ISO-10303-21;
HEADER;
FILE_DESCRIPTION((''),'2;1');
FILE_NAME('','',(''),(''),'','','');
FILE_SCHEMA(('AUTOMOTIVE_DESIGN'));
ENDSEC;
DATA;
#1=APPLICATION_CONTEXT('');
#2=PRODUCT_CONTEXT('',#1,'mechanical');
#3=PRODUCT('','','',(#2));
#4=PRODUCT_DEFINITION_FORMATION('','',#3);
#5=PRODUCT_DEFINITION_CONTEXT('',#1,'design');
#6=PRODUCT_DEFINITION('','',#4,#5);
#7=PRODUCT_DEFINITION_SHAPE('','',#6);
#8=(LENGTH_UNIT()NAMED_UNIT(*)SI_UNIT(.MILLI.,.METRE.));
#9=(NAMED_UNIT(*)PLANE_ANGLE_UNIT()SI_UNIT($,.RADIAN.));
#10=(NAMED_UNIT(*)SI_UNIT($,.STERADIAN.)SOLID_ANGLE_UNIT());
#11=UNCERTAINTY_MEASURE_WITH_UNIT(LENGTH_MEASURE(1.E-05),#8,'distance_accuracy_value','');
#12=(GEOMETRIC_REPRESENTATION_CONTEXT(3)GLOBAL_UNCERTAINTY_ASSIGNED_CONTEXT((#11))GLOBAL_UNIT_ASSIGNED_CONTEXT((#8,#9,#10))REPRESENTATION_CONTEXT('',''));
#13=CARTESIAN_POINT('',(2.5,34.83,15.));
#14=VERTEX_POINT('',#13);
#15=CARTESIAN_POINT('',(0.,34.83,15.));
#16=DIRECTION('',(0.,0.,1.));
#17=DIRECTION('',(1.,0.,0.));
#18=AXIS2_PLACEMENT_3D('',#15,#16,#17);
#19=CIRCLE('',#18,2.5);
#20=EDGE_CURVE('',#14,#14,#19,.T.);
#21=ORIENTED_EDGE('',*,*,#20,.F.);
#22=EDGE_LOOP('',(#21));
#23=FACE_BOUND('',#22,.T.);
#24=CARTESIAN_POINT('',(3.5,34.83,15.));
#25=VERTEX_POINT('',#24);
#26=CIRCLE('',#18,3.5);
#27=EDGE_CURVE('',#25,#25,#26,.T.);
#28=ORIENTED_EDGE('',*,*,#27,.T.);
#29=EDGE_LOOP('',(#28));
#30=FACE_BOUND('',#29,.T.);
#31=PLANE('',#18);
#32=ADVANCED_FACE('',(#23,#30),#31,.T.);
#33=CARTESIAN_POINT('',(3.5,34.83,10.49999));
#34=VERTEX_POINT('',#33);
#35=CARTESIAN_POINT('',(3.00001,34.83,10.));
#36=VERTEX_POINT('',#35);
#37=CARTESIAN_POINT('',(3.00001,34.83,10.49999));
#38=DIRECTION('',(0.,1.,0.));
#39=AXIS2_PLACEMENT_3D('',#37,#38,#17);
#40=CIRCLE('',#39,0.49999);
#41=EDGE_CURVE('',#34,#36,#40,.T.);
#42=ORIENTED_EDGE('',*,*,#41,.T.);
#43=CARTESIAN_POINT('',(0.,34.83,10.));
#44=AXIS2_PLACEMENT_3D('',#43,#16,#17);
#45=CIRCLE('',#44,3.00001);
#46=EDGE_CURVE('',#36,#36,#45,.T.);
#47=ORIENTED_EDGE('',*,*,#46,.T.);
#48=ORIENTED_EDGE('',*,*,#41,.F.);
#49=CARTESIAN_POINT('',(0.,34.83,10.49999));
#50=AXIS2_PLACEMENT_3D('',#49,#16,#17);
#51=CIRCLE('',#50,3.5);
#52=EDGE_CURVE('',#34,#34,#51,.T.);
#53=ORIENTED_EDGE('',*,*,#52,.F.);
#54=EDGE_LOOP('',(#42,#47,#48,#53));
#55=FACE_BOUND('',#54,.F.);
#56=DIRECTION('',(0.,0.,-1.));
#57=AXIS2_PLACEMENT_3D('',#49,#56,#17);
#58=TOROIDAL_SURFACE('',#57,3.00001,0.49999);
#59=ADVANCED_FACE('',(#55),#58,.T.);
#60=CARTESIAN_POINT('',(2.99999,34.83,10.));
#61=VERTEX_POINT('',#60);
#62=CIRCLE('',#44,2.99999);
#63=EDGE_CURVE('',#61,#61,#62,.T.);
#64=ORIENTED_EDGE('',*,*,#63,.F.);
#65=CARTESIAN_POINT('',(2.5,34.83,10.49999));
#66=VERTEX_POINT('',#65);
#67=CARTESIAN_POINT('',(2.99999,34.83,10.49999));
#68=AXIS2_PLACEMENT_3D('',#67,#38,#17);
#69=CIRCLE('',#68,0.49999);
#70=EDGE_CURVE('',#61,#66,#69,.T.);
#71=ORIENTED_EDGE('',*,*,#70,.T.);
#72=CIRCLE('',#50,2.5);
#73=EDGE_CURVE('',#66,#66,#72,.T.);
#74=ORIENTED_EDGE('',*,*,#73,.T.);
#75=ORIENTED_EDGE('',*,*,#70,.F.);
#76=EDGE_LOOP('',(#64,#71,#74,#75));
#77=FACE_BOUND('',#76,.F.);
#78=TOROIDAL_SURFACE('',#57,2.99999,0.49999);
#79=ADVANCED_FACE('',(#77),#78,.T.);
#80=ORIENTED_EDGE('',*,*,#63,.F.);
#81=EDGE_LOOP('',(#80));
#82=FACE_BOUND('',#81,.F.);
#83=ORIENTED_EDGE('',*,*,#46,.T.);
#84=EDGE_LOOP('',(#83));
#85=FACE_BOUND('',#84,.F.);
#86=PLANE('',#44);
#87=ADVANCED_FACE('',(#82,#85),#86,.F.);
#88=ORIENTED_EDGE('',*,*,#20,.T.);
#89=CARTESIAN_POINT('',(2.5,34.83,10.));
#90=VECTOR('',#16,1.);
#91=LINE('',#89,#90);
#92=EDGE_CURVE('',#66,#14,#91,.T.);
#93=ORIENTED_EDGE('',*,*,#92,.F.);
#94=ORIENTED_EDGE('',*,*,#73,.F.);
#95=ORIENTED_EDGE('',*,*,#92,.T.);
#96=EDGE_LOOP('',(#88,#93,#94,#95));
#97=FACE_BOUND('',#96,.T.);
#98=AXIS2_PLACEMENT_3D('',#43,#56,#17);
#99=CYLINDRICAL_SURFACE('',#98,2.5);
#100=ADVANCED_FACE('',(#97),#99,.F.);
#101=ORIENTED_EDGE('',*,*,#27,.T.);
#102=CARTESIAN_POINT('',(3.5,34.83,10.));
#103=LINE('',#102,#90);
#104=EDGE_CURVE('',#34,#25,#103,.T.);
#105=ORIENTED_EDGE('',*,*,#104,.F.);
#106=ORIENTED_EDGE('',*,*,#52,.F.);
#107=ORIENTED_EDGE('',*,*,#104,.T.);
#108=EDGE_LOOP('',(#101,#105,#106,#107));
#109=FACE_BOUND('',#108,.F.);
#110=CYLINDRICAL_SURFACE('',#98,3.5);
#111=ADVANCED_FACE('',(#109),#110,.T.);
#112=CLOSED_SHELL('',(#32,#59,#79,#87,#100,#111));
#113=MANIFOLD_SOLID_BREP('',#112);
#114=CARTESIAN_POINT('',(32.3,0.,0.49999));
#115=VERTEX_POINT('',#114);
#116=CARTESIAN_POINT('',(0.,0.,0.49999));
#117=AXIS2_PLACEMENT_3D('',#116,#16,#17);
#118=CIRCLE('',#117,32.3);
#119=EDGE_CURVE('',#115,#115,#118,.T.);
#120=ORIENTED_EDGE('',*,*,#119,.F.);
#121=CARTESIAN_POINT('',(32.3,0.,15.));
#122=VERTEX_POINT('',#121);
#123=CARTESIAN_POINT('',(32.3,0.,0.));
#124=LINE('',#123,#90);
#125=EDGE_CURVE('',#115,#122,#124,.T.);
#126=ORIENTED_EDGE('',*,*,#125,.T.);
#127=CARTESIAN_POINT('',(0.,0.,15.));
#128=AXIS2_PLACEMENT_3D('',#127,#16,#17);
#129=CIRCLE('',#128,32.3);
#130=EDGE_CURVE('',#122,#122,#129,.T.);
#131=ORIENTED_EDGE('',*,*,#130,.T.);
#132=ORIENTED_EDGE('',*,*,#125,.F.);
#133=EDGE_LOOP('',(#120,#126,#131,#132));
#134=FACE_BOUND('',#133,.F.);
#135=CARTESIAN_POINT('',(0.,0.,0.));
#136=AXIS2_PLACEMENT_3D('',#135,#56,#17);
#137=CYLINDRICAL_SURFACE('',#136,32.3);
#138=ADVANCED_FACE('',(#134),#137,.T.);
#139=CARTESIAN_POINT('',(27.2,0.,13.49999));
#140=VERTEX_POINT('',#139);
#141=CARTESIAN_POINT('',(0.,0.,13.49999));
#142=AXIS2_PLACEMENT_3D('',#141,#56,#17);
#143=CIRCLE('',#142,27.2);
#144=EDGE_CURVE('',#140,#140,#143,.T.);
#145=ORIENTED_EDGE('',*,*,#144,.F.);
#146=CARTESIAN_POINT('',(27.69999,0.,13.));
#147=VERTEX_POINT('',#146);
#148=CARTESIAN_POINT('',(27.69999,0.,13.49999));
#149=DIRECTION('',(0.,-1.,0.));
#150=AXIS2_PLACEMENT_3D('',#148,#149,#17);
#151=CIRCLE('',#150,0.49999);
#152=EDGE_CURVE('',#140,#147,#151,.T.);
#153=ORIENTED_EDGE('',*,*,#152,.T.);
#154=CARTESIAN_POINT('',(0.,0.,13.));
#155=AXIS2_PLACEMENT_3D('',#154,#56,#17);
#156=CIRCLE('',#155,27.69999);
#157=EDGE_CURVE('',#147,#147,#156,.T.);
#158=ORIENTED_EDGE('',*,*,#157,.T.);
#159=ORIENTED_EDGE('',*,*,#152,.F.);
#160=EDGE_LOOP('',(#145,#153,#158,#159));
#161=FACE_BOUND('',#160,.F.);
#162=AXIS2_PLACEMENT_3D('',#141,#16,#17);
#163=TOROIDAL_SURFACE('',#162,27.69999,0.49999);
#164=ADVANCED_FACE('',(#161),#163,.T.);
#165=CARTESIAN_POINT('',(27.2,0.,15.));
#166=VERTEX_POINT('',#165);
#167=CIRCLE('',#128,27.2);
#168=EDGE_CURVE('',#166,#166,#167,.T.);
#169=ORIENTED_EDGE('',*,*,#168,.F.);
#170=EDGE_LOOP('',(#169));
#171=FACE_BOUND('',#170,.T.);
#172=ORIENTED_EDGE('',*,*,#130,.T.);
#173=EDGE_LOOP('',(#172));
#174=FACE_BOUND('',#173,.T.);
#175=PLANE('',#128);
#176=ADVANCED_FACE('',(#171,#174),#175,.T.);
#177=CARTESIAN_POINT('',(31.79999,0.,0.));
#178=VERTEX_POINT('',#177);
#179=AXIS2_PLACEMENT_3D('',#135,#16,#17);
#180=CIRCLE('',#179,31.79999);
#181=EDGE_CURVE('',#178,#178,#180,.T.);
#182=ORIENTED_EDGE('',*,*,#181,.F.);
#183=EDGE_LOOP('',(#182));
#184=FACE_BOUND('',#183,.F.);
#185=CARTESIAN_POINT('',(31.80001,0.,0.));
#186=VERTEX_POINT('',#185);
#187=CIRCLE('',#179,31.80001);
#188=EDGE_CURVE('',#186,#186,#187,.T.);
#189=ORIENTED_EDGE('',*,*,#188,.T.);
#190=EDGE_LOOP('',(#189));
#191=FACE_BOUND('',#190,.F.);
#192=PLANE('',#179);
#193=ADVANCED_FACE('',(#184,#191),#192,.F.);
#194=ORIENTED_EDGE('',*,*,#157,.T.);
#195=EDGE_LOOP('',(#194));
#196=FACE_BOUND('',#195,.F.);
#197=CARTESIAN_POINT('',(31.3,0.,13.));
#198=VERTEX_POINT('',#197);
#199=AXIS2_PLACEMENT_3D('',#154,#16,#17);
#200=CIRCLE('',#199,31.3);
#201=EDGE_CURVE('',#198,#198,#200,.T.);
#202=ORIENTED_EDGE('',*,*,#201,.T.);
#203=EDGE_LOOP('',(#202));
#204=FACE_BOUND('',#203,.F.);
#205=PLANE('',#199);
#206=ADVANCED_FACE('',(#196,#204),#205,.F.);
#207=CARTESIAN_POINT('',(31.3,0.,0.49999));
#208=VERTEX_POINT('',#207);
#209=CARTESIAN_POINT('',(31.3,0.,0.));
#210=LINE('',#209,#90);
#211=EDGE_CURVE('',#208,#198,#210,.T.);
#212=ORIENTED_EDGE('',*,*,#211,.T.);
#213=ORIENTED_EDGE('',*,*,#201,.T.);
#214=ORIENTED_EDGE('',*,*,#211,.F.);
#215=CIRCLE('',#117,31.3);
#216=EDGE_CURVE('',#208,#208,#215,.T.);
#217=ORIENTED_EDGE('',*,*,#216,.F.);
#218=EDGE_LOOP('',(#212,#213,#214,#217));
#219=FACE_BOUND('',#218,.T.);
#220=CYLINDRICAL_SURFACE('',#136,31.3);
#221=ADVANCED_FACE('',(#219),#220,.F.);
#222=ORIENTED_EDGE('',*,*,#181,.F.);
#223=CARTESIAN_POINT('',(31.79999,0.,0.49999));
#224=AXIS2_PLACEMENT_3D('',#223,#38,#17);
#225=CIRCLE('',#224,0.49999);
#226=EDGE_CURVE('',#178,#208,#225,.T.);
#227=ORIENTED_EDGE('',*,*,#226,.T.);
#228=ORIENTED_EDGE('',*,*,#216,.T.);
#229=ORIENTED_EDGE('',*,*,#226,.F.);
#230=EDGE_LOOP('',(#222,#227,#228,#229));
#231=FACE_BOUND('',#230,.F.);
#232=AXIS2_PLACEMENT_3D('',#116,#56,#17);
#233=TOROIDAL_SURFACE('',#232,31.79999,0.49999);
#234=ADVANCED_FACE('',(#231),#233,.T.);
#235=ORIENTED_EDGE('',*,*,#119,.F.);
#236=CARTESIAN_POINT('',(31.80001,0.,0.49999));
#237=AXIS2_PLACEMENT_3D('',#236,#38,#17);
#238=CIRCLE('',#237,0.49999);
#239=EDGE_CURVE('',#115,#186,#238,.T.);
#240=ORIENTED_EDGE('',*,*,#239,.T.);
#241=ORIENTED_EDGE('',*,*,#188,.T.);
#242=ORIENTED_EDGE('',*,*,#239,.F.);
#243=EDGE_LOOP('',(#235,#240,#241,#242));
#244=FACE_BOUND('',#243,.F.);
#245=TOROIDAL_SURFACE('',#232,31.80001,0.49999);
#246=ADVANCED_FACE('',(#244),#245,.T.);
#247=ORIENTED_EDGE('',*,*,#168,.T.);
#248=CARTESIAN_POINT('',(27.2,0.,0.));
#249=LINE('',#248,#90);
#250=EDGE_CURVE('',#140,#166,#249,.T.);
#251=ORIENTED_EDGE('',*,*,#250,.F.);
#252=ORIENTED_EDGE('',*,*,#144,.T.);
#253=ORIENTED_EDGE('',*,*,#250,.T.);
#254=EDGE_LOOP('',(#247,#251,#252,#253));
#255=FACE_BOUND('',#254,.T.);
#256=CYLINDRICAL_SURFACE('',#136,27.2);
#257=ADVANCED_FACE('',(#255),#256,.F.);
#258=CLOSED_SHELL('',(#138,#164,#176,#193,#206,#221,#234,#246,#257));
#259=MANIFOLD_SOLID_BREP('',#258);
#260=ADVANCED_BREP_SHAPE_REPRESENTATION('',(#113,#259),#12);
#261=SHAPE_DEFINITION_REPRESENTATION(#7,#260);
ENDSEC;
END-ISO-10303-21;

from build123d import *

# Parameters (mm, degrees)
F0_R     = 32.3
F1_DEPTH = 15
F2_R     = 31.3
F3_DEPTH = 13
F4_R     = 27.2
F5_DEPTH = 15
F6_R     = 3.5
F7_DEPTH = 5
F8_R     = 2.5
F9_DEPTH = 5
F12_R    = 0.49999
F12_2_R  = 0.49999


# Not quite as in the source:
# - a fillet or chamfer is up to 0.001 mm smaller than in the source, because OpenCascade refuses the exact size


with BuildPart() as f1:
    # F0 (on Top) → F1 (new body)
    with BuildSketch(Plane.XY):
        Circle(F0_R)
    extrude(amount=F1_DEPTH)

    # F2 (on Top) → F3 (cut)
    with BuildSketch(Plane.XY):
        Circle(F2_R)
    extrude(amount=F3_DEPTH, mode=Mode.SUBTRACT)

    # F4 (on Top) → F5 (cut)
    with BuildSketch(Plane.XY):
        Circle(F4_R)
    extrude(amount=F5_DEPTH, mode=Mode.SUBTRACT)

    # F12 (radius 0.5 in the source; OpenCascade refuses exactly that, so slightly less here)
    f12_edges = [f1.edges().sort_by_distance(p)[0] for p in [
        (-27.2, 0, 13),
        (-31.3, 0, 0),
        (-32.3, 0, 0),
    ]]
    fillet(f12_edges, radius=F12_R)


with BuildPart() as f7:
    # F6 (on Top) → F7 (new body)
    with BuildSketch(Plane.XY):
        Circle(F6_R)
    extrude(amount=F7_DEPTH)

    # F8 (on Top) → F9 (cut)
    with BuildSketch(Plane.XY):
        Circle(F8_R)
    extrude(amount=F9_DEPTH, mode=Mode.SUBTRACT)


with BuildPart() as f7_1:
    # F10: moved
    add(f7.part.moved(Location((0, 34.6, 0))))


with BuildPart() as f7_2:
    # F11: moved
    add(f7_1.part.moved(Location((0, 0.23, 0))))

    # F12#2 (radius 0.5 in the source; OpenCascade refuses exactly that, so slightly less here)
    f12_2_edges = [f7_2.edges().sort_by_distance(p)[0] for p in [
        (-2.5, 34.83, 0),
        (-3.5, 34.83, 0),
    ]]
    fillet(f12_2_edges, radius=F12_2_R)


with BuildPart() as f7_3:
    # F13: moved
    add(f7_2.part.moved(Location((0, 0, 10))))


solid = Compound([f1.part, f7_3.part])
